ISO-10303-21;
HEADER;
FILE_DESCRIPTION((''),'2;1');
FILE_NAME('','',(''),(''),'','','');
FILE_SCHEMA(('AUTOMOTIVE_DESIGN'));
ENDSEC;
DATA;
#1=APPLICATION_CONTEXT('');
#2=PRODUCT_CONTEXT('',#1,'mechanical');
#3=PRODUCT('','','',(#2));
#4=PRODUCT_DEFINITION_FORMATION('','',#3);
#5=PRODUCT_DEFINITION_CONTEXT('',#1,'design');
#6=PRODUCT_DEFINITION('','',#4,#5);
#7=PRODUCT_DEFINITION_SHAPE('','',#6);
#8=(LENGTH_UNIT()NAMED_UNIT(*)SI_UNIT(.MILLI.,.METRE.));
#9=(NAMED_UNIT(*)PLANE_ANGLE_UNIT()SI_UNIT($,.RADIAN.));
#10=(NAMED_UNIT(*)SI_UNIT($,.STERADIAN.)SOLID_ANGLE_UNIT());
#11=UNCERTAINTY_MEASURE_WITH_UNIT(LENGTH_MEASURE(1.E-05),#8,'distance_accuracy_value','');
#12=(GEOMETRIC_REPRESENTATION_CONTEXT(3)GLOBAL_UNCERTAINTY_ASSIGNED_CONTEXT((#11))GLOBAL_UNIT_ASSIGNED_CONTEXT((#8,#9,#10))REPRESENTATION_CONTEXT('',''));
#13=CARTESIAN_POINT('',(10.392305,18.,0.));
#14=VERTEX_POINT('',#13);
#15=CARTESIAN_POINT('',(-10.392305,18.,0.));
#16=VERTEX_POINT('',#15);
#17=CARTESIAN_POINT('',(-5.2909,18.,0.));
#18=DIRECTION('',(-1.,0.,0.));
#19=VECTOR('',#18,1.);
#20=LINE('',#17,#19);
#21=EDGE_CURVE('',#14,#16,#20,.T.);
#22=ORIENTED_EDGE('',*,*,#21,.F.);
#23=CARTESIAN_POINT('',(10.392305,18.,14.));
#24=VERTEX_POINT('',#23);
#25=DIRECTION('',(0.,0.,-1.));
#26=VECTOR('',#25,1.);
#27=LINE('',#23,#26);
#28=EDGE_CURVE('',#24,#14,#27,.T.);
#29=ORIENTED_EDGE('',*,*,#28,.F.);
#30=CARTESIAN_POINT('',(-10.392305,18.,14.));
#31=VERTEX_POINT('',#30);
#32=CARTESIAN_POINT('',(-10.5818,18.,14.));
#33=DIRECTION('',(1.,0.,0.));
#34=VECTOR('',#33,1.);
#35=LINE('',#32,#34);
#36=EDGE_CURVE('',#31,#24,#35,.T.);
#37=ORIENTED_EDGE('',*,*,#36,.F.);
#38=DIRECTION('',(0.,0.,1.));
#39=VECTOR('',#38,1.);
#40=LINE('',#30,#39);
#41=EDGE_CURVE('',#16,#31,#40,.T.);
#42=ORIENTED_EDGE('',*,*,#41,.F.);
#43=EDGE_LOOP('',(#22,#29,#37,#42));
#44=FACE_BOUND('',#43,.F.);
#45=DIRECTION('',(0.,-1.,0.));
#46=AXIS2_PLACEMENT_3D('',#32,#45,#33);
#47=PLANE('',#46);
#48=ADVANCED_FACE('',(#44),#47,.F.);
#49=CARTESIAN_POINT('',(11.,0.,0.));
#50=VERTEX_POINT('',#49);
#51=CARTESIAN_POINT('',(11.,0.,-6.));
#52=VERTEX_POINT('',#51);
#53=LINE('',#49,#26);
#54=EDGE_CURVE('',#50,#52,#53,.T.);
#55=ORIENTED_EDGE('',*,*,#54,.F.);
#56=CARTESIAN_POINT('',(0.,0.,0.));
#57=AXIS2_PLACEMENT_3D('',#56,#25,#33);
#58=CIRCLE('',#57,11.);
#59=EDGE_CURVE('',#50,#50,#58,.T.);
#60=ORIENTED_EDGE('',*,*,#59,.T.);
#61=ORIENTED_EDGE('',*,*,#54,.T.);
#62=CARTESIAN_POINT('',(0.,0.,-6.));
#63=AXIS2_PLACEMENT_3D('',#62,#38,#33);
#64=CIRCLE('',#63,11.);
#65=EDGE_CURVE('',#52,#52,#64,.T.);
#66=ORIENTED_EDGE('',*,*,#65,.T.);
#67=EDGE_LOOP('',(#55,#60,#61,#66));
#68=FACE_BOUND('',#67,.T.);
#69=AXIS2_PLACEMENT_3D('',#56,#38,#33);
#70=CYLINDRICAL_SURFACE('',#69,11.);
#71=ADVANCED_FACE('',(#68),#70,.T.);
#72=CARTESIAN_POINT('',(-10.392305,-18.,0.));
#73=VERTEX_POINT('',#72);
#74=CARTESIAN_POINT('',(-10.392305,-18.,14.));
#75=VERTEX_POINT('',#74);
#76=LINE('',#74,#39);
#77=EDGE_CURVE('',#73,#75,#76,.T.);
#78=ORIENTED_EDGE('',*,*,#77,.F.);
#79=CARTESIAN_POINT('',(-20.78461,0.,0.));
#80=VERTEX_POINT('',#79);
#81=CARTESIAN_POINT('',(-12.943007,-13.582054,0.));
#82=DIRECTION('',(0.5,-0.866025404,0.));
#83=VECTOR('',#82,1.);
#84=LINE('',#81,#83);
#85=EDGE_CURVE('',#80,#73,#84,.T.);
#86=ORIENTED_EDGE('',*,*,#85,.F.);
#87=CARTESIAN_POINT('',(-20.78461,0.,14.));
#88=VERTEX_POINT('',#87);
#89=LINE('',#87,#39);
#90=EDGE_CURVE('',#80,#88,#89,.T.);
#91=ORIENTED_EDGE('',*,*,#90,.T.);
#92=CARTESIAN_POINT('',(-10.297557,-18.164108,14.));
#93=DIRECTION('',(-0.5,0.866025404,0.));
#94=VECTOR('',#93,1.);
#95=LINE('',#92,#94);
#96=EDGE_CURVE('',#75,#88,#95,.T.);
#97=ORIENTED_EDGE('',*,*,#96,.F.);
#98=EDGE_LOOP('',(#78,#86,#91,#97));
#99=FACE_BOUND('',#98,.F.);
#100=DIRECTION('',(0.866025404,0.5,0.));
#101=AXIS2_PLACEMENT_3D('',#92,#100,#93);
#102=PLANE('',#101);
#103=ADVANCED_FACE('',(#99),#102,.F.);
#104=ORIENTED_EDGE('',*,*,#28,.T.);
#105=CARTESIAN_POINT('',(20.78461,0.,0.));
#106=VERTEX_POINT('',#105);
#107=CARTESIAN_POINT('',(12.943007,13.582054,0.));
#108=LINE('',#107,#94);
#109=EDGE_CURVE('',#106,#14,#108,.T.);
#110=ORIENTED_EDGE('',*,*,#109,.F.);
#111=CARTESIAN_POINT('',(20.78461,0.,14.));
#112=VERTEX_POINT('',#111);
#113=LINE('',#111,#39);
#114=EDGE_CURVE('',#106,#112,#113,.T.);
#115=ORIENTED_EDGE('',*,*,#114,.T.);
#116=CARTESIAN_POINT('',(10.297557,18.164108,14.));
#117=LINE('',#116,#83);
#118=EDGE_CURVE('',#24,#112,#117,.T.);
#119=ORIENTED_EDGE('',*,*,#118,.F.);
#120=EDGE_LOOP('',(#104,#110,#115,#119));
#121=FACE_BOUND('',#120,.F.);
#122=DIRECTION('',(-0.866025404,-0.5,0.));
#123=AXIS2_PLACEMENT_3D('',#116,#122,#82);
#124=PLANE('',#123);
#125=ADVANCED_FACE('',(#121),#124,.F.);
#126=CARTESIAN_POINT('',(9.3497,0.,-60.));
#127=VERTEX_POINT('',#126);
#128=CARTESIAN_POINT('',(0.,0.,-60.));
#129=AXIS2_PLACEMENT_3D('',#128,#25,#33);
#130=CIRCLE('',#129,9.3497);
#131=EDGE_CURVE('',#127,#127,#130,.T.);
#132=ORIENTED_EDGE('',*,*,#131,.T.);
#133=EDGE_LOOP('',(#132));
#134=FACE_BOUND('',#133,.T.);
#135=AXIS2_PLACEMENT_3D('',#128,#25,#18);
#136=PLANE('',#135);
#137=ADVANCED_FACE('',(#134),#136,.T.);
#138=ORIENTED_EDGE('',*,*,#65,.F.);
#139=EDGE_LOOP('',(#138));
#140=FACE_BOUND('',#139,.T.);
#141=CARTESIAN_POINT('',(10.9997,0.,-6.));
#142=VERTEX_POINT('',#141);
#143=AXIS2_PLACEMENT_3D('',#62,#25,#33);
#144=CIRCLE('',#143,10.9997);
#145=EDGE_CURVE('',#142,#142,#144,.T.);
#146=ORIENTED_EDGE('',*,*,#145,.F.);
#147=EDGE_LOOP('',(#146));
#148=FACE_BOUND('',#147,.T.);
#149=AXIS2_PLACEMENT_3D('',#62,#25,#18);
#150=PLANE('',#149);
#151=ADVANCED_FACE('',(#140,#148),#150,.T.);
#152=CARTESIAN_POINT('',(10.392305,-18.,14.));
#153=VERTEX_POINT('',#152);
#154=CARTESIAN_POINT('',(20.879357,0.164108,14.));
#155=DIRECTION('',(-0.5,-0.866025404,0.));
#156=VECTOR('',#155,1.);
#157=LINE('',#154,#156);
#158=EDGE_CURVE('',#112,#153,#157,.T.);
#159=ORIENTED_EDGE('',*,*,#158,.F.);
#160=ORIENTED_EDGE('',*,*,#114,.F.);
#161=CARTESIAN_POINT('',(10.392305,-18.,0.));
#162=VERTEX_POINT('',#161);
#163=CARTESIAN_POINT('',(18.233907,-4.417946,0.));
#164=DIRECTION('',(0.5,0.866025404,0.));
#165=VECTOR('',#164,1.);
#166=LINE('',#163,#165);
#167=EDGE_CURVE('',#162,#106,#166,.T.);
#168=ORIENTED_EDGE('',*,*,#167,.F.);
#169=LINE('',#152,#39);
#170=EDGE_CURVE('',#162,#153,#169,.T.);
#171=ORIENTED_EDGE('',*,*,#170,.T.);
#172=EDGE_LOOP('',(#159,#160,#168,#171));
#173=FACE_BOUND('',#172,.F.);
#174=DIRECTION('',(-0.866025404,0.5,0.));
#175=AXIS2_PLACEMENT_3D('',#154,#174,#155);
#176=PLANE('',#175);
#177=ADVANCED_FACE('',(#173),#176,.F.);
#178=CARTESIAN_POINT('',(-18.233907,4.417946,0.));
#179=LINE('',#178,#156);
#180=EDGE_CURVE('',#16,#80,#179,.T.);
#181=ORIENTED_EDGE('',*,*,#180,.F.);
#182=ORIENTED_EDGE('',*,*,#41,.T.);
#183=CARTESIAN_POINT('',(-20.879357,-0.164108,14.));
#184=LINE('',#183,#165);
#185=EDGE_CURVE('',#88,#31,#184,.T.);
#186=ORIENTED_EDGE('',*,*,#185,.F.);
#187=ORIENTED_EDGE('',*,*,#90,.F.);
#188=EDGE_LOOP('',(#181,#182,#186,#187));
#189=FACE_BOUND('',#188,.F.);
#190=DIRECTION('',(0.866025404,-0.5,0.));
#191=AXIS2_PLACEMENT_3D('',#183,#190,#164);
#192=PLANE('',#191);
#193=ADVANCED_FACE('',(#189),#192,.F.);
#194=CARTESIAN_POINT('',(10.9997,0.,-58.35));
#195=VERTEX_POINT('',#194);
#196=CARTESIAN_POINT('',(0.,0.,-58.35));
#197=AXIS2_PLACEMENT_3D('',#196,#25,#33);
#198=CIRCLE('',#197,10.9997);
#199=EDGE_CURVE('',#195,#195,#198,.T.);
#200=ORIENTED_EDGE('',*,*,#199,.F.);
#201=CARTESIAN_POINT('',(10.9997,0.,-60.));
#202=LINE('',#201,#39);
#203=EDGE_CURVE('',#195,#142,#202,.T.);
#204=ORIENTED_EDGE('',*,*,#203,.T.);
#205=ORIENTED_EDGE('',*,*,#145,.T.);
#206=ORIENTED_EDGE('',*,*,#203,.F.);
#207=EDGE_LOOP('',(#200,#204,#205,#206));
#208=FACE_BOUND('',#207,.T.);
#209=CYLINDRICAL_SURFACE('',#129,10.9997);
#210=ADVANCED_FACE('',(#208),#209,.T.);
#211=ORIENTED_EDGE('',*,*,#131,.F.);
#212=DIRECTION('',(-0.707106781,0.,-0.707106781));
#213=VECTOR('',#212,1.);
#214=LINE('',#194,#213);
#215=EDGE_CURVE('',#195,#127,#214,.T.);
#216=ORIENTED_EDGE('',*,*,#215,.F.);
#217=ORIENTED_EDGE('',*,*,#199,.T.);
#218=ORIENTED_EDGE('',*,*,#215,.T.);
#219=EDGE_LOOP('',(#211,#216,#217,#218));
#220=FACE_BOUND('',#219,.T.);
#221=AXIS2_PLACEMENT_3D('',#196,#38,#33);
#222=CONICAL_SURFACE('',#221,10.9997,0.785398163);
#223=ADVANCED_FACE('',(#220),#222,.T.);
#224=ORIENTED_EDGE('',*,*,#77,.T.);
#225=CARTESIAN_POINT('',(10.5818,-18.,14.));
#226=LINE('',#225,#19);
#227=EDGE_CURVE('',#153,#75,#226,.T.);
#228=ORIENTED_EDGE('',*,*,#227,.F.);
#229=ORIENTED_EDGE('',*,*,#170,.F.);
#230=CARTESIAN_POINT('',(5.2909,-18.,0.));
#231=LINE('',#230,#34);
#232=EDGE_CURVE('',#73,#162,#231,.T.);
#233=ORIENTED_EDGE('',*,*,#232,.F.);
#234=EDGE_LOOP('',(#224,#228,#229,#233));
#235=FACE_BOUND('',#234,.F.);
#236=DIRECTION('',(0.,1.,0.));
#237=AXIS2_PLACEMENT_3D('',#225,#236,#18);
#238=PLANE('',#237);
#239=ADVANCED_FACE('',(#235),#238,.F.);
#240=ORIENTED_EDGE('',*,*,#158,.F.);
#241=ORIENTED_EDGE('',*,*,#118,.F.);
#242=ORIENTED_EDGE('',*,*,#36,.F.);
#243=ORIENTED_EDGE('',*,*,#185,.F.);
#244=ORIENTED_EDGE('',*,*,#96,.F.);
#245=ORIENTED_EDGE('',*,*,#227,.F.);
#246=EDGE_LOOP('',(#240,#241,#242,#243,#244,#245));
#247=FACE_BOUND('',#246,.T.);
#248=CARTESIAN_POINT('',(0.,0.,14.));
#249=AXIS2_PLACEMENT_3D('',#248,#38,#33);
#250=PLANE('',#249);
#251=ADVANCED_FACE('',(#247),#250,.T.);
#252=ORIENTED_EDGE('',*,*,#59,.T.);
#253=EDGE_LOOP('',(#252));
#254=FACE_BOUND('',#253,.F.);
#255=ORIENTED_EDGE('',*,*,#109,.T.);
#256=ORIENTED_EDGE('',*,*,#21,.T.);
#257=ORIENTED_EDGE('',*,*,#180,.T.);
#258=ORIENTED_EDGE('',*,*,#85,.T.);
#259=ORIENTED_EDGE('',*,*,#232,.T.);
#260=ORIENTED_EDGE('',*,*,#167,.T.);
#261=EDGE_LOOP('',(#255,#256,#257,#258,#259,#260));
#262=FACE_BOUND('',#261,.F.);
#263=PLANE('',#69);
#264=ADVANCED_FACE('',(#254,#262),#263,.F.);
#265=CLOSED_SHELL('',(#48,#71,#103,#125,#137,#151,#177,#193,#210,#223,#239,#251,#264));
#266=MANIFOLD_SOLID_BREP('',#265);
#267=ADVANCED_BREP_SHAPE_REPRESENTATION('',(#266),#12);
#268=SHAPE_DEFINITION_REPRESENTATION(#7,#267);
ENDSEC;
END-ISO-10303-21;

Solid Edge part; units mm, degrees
sketch "Sketch1" plane through (0, 0, 0) normal (0, 0, 1) x (1, 0, 0)
  circle A0 centre (0, 0) radius 20.88
  dimension "D1" = 41.76
extrude "Protrusion1" add sketch "Sketch1" along normal blind 14
sketch "Sketch2" plane through (0, 0, 0) normal (0, 0, -1) x (1, 0, 0)
  circle A0 centre (0, 0) radius 11
extrude "Protrusion2" add sketch "Sketch2" along normal blind 60
sketch "Sketch3" plane through (0, 0, -60) normal (0, 0, -1) x (1, 0, 0)
  circle A0 centre (0, 0) radius 10.9997
extrude "Cutout1" cut sketch "Sketch3" against normal blind 54 flip side to cut
chamfer "Chamfer_1" distance 1.65 angle 45 1 edges at (-10.9997, 0, -60)
sketch "Sketch4" plane through (0, 0, 14) normal (0, 0, 1) x (1, 0, 0)
  line L0 (-10.5818, 18) -> (10.5818, 18)
  dimension "D1" = 36
extrude "Cutout2" cut sketch "Sketch4" against normal up to next material side at (0, 18.05, 14)
pattern_circular "Pattern1" count 6 over 360 about axis through (0, 0, 14) along (0, 0, 1) of "Cutout2"
properties part number "24101734"
